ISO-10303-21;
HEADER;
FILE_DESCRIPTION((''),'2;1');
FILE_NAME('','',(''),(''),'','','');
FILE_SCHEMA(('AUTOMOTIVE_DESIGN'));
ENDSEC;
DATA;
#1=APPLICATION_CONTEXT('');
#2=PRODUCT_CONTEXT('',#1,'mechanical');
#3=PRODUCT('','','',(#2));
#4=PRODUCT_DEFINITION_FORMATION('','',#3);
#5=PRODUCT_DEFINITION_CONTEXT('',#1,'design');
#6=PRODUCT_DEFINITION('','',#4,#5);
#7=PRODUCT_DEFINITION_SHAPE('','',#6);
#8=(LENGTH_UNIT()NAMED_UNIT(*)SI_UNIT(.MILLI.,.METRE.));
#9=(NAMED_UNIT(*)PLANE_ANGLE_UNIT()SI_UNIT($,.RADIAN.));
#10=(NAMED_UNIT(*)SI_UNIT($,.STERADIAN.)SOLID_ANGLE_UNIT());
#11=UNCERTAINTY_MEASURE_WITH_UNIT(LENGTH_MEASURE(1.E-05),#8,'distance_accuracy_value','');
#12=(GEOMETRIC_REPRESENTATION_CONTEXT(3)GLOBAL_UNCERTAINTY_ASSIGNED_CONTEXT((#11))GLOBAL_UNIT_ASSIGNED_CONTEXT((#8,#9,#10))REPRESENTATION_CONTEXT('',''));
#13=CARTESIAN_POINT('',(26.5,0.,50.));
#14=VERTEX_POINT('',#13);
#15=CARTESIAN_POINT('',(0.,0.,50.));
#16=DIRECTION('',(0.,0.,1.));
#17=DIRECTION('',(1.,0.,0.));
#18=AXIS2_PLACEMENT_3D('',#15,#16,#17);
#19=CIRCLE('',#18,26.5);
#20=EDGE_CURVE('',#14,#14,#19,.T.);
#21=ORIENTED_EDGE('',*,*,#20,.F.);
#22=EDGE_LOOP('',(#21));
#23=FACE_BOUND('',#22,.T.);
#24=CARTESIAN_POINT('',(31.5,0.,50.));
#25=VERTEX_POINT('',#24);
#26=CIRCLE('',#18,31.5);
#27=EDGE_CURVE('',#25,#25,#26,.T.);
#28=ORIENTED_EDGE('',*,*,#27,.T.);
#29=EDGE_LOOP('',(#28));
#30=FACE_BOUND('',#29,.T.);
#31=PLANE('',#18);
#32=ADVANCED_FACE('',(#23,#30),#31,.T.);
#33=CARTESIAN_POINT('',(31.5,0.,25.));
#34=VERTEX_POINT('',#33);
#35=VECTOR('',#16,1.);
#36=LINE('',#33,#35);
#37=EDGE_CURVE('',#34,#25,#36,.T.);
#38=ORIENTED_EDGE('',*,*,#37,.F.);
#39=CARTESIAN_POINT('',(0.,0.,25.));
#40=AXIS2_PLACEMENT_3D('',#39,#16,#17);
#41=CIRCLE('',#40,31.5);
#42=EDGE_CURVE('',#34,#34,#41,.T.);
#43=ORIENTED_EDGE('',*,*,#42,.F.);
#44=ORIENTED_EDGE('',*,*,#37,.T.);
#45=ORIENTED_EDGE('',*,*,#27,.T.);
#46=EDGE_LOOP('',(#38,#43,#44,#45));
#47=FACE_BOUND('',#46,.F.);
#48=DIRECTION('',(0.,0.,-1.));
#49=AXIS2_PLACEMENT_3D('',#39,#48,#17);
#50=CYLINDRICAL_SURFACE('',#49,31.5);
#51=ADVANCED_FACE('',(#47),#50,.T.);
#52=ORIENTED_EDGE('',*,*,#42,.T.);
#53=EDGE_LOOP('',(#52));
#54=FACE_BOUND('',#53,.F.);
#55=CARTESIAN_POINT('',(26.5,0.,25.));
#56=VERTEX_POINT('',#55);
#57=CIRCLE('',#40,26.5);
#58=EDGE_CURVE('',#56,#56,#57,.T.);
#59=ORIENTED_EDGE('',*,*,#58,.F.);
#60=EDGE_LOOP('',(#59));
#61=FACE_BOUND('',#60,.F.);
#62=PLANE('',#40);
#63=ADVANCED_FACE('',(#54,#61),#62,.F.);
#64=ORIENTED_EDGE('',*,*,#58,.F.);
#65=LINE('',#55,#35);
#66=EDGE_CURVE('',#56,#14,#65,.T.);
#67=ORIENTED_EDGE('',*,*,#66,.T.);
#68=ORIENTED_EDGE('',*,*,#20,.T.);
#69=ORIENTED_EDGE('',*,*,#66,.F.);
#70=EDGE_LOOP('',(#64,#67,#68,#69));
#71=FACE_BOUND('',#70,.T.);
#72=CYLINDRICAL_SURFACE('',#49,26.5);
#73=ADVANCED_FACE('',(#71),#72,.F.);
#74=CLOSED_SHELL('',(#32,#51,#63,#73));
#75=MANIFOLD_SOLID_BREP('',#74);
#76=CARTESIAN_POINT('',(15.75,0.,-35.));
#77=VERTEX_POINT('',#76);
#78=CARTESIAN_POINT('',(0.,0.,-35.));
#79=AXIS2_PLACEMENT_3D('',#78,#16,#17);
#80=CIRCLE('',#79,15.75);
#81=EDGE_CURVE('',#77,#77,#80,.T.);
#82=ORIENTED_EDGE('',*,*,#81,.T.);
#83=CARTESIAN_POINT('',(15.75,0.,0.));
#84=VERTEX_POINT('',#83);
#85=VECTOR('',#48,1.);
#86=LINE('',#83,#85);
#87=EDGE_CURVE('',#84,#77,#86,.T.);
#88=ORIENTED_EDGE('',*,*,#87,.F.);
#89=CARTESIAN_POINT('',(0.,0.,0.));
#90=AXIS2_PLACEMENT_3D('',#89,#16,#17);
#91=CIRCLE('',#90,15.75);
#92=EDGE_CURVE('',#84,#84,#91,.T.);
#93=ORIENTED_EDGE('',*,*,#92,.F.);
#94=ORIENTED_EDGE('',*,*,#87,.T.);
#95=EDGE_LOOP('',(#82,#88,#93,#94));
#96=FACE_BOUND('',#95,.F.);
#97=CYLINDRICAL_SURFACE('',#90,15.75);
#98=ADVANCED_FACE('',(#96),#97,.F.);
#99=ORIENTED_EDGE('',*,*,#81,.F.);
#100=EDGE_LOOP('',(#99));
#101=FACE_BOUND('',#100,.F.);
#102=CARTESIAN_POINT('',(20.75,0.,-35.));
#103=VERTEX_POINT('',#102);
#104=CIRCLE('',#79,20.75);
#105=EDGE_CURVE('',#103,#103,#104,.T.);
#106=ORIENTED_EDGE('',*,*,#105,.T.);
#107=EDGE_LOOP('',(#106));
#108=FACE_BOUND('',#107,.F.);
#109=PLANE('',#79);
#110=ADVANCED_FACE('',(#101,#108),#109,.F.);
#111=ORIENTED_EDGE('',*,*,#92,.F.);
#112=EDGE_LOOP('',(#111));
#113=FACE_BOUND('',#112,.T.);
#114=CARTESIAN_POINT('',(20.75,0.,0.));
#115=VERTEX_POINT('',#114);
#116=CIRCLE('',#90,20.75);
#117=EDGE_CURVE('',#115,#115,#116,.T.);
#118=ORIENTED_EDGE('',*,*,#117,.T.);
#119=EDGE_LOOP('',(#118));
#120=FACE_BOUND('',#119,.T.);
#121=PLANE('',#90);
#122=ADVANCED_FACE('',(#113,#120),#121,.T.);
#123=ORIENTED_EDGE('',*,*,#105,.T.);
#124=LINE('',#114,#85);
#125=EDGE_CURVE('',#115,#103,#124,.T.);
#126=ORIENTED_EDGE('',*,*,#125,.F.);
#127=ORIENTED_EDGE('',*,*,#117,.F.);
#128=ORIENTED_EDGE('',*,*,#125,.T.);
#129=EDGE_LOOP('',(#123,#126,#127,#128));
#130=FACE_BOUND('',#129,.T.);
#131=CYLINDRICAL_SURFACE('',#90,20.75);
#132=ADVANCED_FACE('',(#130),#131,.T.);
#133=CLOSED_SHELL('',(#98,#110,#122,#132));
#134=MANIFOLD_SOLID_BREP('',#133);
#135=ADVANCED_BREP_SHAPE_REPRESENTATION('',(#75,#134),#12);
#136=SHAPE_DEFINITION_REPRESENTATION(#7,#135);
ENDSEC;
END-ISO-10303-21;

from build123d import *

# Parameters (mm, degrees)
F0_R     = 20.75
F0_R_2   = 15.75
F3_DEPTH = 35
F2_R     = 31.5
F2_R_2   = 26.5
F4_DEPTH = 25


# Not quite as in the source:
# - the program builds the solid bodies; features that only make, move or delete a surface that nothing else refers to are left out


with BuildPart() as f3:
    # F0 (on Top) → F3 (new body)
    with BuildSketch(Plane.XY):
        Circle(F0_R)
        Circle(F0_R_2, mode=Mode.SUBTRACT)
    extrude(amount=-F3_DEPTH)


with BuildPart() as f4:
    # F2 (on offset) → F4 (new body)
    with BuildSketch(Plane.XY.offset(25)):
        Circle(F2_R)
        Circle(F2_R_2, mode=Mode.SUBTRACT)
    extrude(amount=F4_DEPTH)


solid = Compound([f3.part, f4.part])
